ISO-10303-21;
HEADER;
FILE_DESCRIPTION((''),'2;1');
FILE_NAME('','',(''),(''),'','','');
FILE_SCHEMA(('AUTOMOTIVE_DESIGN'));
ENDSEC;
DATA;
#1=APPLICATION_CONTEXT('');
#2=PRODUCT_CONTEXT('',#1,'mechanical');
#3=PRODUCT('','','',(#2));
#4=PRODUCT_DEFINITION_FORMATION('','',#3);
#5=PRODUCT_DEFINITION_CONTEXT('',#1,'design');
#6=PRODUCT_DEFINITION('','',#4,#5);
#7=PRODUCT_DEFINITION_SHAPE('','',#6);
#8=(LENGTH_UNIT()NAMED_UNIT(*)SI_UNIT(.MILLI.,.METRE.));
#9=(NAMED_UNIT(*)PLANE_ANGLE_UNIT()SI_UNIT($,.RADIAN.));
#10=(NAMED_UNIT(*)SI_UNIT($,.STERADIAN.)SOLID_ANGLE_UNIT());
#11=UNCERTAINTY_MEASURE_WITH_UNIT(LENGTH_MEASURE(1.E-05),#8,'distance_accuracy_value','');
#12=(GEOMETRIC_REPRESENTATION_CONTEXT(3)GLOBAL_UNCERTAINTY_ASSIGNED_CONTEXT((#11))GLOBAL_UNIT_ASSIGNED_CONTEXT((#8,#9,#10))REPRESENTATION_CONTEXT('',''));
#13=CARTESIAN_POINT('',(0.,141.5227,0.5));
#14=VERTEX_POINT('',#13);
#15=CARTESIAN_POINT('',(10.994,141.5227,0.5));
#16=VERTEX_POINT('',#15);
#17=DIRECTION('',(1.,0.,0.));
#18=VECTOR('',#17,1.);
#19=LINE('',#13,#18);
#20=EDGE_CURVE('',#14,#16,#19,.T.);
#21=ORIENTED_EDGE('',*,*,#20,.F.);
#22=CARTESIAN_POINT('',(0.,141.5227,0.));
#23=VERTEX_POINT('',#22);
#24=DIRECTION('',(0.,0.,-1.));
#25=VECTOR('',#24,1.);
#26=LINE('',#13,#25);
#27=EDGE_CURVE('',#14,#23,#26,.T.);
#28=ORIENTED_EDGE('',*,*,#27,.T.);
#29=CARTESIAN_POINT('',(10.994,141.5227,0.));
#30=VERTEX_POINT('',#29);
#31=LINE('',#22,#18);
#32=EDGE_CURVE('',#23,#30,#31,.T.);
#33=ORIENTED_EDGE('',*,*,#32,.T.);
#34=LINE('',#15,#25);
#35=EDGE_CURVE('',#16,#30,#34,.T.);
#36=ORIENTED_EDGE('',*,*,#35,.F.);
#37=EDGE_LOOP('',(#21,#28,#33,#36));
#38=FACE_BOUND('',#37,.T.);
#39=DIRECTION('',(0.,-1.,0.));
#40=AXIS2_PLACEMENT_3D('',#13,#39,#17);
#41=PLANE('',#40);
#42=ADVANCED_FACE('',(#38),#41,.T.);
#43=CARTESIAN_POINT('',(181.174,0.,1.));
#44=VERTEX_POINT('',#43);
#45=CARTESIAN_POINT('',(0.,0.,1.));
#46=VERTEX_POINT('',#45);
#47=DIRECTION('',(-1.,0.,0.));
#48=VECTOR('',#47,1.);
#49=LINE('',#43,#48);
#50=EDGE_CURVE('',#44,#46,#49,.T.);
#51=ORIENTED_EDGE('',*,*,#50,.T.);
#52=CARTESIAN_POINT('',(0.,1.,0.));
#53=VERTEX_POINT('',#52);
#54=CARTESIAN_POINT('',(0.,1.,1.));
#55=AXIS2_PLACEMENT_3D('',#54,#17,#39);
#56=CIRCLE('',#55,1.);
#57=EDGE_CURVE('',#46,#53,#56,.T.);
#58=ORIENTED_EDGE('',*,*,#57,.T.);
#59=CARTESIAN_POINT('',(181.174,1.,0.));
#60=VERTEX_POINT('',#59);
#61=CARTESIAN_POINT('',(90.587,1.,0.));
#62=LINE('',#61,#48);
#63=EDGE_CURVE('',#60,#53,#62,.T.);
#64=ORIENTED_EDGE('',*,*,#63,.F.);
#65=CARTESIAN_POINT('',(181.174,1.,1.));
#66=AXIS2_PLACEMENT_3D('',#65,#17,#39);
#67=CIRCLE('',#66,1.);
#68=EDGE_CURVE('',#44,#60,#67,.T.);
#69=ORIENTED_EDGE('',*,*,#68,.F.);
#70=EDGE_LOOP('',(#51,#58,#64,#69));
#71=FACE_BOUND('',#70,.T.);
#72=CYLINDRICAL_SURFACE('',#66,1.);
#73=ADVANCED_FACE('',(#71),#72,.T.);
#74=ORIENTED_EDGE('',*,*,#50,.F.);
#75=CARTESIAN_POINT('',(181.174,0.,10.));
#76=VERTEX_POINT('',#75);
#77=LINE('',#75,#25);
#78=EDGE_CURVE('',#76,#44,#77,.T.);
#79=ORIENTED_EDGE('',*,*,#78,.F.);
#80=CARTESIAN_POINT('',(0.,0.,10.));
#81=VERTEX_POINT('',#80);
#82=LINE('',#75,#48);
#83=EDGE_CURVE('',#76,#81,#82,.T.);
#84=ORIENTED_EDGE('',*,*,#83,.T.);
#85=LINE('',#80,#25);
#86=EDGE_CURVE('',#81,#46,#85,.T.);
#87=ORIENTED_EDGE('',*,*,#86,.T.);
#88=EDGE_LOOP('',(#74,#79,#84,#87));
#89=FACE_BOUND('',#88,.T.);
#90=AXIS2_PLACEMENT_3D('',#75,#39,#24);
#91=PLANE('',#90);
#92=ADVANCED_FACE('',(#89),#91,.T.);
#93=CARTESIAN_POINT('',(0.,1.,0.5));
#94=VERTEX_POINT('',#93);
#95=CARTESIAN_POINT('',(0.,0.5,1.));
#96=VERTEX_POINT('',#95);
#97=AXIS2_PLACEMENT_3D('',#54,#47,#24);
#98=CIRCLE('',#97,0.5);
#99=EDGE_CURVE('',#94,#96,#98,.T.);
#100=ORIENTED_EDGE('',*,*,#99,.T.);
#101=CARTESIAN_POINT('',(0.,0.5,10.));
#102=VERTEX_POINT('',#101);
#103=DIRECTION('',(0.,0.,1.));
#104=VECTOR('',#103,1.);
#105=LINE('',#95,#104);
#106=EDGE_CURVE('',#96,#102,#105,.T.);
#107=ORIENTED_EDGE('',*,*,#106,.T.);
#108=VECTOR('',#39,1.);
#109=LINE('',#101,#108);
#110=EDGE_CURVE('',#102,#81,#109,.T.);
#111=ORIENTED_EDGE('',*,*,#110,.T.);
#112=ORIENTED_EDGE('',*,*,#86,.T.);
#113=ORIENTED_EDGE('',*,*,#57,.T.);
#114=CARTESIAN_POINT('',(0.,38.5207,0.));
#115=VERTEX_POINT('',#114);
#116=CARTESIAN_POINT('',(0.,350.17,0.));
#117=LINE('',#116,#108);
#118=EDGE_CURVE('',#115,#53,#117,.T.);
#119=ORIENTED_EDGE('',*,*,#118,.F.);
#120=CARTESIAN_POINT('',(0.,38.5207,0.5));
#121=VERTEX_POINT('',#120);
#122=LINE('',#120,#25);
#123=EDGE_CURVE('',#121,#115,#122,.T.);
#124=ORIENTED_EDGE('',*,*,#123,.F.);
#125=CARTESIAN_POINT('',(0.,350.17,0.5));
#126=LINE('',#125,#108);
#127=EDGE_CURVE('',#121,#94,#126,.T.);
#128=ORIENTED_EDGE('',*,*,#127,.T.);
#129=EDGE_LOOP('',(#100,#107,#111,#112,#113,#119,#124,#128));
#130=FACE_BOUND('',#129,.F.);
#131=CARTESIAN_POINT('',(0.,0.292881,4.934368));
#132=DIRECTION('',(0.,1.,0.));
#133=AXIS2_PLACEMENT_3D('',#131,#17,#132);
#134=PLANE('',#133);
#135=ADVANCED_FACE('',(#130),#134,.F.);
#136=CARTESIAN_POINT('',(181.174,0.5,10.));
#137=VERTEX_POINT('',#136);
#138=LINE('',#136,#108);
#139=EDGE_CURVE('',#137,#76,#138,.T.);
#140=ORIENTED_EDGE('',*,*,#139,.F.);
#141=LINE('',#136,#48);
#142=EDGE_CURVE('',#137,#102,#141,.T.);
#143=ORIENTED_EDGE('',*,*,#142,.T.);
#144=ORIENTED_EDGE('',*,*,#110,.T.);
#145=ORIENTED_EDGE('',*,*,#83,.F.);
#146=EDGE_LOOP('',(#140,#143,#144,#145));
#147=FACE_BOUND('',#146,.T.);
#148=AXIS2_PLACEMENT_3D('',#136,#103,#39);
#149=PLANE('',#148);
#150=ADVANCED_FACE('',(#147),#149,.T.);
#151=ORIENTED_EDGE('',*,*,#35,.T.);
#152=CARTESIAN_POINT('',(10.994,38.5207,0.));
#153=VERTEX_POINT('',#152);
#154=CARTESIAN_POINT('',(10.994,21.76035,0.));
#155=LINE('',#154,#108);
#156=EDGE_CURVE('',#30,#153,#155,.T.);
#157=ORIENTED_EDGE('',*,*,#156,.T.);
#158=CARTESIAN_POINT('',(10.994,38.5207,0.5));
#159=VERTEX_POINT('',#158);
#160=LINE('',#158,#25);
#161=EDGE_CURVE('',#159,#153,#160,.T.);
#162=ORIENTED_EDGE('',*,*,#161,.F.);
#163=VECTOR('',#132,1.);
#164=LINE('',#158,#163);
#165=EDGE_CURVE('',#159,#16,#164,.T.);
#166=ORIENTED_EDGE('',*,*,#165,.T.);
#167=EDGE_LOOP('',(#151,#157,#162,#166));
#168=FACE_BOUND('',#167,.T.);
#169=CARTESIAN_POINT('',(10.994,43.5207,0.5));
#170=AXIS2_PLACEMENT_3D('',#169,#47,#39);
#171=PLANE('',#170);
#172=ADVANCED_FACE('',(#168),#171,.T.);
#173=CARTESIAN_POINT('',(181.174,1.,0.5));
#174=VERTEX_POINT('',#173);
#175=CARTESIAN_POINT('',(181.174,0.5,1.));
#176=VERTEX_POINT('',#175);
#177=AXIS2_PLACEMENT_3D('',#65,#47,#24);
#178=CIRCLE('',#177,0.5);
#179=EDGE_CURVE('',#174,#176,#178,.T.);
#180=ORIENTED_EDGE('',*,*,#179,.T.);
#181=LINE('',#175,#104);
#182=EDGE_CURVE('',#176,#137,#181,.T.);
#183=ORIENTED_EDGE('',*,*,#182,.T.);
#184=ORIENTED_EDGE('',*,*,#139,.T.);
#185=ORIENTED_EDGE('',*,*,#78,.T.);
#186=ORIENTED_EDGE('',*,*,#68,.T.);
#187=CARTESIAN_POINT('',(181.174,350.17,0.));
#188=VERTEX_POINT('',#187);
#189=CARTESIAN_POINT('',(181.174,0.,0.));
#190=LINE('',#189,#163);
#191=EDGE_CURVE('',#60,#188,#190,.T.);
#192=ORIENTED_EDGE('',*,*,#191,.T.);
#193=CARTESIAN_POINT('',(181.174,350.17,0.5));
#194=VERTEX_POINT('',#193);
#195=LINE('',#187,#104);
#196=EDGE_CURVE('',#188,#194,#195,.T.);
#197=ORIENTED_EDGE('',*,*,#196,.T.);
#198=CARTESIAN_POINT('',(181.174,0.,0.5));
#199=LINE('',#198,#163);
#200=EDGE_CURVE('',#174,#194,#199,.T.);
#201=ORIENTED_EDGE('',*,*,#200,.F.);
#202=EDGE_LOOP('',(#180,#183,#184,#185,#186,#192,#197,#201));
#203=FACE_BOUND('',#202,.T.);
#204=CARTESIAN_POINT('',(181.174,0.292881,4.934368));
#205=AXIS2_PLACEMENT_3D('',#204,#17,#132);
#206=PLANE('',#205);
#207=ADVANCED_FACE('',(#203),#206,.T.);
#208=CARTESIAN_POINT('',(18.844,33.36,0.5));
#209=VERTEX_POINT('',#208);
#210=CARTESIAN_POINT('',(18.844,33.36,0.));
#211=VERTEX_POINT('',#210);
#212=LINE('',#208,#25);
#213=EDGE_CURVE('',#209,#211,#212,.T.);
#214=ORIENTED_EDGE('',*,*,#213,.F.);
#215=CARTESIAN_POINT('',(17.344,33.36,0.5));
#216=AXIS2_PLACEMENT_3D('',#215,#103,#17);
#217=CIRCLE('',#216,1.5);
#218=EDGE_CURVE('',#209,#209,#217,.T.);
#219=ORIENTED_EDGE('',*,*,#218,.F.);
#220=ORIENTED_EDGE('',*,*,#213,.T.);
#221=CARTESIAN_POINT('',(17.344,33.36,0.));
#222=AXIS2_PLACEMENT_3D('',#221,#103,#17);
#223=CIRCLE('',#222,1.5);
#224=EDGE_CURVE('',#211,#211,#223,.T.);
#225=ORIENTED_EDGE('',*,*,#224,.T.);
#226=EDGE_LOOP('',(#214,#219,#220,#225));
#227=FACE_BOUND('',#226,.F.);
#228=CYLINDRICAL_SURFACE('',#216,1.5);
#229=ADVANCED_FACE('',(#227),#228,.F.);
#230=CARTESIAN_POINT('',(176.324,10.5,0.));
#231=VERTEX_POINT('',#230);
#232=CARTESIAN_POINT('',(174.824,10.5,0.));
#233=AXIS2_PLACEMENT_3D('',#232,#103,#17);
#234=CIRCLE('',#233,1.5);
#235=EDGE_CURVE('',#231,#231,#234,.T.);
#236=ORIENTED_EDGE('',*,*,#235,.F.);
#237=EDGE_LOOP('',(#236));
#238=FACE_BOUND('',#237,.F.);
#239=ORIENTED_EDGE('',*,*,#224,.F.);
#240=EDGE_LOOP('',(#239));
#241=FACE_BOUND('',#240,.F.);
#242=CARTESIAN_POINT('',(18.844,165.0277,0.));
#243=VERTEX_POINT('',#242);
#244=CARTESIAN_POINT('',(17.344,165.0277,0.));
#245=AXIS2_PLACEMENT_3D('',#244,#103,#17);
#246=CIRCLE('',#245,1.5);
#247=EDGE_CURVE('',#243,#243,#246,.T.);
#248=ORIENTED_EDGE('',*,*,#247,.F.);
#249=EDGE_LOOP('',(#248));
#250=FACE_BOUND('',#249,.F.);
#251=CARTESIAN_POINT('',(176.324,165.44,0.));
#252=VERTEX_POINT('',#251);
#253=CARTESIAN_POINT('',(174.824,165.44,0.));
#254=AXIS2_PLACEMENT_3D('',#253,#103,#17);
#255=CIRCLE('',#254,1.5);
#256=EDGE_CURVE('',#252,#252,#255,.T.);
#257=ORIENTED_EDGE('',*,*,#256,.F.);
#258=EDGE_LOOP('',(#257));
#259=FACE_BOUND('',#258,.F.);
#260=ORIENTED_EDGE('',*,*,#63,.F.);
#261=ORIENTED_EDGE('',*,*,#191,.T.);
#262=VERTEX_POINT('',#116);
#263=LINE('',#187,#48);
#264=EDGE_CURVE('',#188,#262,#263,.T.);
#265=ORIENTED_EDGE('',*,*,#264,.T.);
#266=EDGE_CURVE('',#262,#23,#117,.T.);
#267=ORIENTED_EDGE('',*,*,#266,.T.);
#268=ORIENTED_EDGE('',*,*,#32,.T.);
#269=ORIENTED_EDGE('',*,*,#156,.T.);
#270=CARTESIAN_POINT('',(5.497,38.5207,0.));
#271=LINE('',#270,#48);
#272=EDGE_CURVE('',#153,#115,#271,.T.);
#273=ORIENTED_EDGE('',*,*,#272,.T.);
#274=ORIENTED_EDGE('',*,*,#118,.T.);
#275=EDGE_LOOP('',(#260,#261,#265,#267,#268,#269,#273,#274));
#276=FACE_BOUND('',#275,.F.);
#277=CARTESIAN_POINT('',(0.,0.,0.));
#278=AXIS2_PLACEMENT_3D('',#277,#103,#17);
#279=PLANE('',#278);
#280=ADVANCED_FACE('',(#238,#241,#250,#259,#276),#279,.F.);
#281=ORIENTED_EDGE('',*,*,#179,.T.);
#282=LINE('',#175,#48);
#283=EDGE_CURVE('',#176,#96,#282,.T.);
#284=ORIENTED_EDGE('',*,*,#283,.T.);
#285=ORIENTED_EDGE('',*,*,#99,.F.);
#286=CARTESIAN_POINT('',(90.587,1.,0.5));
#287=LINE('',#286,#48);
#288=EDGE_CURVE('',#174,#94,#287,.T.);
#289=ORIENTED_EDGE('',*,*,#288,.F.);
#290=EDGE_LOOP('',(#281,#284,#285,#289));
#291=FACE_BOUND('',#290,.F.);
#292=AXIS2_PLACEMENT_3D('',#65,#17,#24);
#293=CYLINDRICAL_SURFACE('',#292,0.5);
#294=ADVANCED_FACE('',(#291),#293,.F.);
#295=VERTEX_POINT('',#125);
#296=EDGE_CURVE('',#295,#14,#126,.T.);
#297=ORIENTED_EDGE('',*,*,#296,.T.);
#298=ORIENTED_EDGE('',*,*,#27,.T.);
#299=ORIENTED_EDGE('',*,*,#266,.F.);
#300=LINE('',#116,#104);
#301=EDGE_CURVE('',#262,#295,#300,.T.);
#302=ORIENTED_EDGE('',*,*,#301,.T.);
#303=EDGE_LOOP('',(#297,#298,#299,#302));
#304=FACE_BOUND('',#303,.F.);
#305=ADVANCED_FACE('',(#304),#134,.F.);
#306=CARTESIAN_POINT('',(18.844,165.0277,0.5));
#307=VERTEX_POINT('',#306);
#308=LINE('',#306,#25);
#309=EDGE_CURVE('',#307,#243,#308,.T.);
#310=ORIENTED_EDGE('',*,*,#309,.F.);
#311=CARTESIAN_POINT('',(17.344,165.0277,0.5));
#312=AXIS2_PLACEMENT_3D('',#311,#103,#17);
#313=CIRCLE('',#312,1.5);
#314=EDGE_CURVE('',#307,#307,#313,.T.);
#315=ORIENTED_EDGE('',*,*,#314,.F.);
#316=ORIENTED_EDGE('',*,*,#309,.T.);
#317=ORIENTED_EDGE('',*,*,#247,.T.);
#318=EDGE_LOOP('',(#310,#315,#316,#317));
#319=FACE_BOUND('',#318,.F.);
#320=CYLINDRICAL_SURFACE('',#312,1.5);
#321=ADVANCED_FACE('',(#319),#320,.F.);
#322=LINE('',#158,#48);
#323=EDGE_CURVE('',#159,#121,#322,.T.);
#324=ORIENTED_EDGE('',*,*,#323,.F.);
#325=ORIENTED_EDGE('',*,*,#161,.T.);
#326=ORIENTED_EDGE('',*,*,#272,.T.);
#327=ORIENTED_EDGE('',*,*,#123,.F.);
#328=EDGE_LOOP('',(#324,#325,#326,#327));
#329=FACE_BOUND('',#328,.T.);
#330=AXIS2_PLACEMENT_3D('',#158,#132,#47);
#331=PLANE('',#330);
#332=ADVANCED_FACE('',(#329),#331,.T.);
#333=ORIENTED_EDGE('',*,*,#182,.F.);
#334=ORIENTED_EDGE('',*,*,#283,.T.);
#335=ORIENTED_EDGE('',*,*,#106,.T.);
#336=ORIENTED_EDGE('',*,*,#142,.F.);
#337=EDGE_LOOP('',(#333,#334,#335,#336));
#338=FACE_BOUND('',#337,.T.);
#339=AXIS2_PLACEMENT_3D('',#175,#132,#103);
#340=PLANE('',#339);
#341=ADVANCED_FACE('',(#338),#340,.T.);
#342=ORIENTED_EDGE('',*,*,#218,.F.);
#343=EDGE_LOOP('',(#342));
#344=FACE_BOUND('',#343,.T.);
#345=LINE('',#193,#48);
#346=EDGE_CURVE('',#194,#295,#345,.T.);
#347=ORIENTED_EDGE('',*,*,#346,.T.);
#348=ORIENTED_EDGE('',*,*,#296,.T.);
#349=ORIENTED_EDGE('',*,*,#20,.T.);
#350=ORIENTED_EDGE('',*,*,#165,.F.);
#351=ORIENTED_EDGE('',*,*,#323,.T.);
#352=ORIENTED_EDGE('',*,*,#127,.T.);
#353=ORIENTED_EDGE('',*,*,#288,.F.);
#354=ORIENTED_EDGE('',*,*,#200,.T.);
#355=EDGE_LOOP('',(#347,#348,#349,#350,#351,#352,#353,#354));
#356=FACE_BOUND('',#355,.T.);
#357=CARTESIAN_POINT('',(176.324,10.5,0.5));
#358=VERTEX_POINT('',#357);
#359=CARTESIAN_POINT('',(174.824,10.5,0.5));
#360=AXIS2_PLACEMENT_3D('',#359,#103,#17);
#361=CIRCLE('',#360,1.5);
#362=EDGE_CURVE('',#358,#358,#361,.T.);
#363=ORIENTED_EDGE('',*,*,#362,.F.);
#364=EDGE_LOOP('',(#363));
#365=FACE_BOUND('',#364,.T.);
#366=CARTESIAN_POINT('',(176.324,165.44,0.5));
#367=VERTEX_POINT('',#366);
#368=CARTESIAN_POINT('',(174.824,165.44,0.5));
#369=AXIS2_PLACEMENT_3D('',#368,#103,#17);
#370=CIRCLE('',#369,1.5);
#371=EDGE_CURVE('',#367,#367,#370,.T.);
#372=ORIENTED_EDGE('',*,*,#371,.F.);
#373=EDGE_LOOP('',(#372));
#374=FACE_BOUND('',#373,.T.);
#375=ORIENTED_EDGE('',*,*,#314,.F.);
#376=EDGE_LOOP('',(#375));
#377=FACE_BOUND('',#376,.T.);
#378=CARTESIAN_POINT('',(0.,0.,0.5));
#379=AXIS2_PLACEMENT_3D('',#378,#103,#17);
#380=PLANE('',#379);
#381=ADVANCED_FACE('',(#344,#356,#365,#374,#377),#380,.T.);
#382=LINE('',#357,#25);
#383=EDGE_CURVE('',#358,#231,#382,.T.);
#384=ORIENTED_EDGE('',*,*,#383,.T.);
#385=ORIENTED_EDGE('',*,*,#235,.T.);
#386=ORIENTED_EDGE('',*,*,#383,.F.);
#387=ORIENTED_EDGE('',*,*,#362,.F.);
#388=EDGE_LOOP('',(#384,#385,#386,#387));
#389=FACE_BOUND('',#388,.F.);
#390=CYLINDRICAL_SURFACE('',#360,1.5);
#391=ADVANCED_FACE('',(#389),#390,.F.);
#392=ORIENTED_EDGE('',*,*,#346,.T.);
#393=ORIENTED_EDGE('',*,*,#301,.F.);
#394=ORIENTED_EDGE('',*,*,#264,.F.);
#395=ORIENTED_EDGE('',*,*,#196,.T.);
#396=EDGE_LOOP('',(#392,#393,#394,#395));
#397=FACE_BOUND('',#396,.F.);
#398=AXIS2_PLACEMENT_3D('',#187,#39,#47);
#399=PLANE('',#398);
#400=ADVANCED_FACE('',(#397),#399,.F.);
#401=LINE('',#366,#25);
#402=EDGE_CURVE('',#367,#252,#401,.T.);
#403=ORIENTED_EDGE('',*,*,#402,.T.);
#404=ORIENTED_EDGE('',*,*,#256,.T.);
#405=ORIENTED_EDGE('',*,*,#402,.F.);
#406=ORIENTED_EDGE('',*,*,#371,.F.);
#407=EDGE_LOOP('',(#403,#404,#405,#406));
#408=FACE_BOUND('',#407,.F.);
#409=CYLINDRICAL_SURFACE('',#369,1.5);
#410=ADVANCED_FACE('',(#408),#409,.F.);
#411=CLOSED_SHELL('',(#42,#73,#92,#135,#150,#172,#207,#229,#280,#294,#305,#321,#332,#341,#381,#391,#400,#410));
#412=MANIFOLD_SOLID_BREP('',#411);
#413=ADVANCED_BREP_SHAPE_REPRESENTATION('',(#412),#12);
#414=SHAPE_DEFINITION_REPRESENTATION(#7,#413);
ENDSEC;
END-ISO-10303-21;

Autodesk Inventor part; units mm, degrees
ref_plane "YZ Plane" through (0, 0, 0) normal (1, 0, 0) x (0, 1, 0)
ref_plane "XZ Plane" through (0, 0, 0) normal (0, 1, 0) x (-1, 0, 0)
ref_plane "XY Plane" through (0, 0, 0) normal (0, 0, 1) x (1, 0, 0)
sketch "Sketch1" plane through (0, 0, 0) normal (0, 0, 1) x (1, 0, 0)
  line L0 (0, 0) -> (181.174, 0)
  line L1 (181.174, 0) -> (181.174, 350.17)
  line L2 (181.174, 350.17) -> (0, 350.17)
  line L3 (0, 350.17) -> (0, 0)
  dimension "d0" = 181.174
  dimension "d1" = 350.17
extrude "Plate1" add sketch "Sketch1" along normal blind 0.5
sketch "Sketch3" plane through (181.174, 0.5, 0) normal (0, -1, 0) x (1, 0, 0)
  line L0 (-181.174, 0) -> (0, 0)
  line L1 (0, 0) -> (0, 10)
  line L2 (0, 10) -> (-181.174, 10)
  line L3 (-181.174, 10) -> (-181.174, 0)
edge flange "Flange1" height 10 angle 90 thickness 0.5 bend radius 0.5 thickness toward (0, -1, 0) relief tear relief width 0.5 relief depth 0.25 edges at (90.587, 0, 0.5) wall of the first edge with corners at (0, 0.5, 0) (181.174, 0.5, 0) (181.174, 0.5, 10) (0, 0.5, 10)
bend "Bend1"
corner "Corner1"
sketch "Sketch4" plane through (0, 0, 0.5) normal (0, 0, 1) x (1, 0, 0)
  line L0 (181.174, 350.17) -> (181.174, 1) projected
  line L1 (10.4326, 171.5141) -> (10.4326, 6.5941)
  arc A0 (10.4326, 6.5941) -> (12.9726, 4.0541) centre (12.9726, 6.5941) ccw
  line L2 (177.8926, 4.0541) -> (12.9726, 4.0541)
  arc A1 (177.8926, 4.0541) -> (180.4326, 6.5941) centre (177.8926, 6.5941) ccw
  line L3 (180.4326, 171.5141) -> (180.4326, 6.5941)
  arc A2 (180.4326, 171.5141) -> (177.8926, 174.0541) centre (177.8926, 171.5141) ccw
  line L4 (177.8926, 174.0541) -> (12.9726, 174.0541)
  arc A3 (12.9726, 174.0541) -> (10.4326, 171.5141) centre (12.9726, 171.5141) ccw
  circle A4 centre (174.0826, 14.2141) radius 2.032
  circle A5 centre (174.0826, 169.1541) radius 2.032
  circle A6 centre (16.6026, 169.1541) radius 2.032
  circle A7 centre (16.6026, 37.0741) radius 2.032
  line L5 (181.174, 0) -> (181.174, 10.5)
  line L6 (181.174, 1) -> (181.174, 350.17) projected
  line L7 (181.174, 10.5) -> (174.824, 10.5) construction
  circle A8 centre (174.824, 10.5) radius 1.5
  line L8 (174.824, 10.5) -> (17.344, 10.5) construction
  line L9 (17.344, 10.5) -> (17.344, 33.36) construction
  circle A9 centre (17.344, 33.36) radius 1.5
  line L10 (17.344, 33.36) -> (17.344, 165.44) construction
  circle A10 centre (17.344, 165.0277) radius 1.5
  line L11 (174.824, 10.5) -> (174.824, 165.44) construction
  circle A11 centre (174.824, 165.44) radius 1.5
  point P0 (0, 0)
  point P1 (95.4326, 89.0541)
  dimension "d26" = 10.5
  dimension "d27" = 6.35
  dimension "d28" = 3
  dimension "d29" = 157.48
  dimension "d30" = 22.86
  dimension "d31" = 3
  dimension "d32" = 132.08
  dimension "d33" = 3
  dimension "d34" = 154.94
  dimension "d35" = 3
extrude "Extrusion2" cut sketch "Sketch4" against normal blind 10 contours A8 | A9 | A10 | A11
sketch "Sketch5" plane through (0, 0, 0.5) normal (0, 0, 1) x (1, 0, 0)
  circle A0 centre (17.344, 165.0277) radius 1.5 projected
  line L0 (0, 1) -> (0, 350.17) projected
  line L1 (17.344, 165.0277) -> (17.344, 131.5227) construction
  line L2 (17.344, 131.5227) -> (17.344, 43.5207) construction
  line L3 (17.344, 131.5227) -> (10.994, 131.5227) construction
  line L4 (10.994, 131.5227) -> (0, 131.5227)
  line L5 (0, 131.5227) -> (0, 43.5207)
  line L6 (0, 43.5207) -> (10.994, 43.5207)
  line L7 (10.994, 43.5207) -> (10.994, 131.5227)
  line L8 (10.994, 131.5227) -> (0, 131.5227)
  line L9 (0, 131.5227) -> (0, 141.5227)
  line L10 (0, 141.5227) -> (10.994, 141.5227)
  line L11 (10.994, 141.5227) -> (10.994, 131.5227)
  line L12 (0, 43.5207) -> (10.994, 43.5207)
  line L13 (10.994, 43.5207) -> (10.994, 38.5207)
  line L14 (10.994, 38.5207) -> (0, 38.5207)
  line L15 (0, 38.5207) -> (0, 43.5207)
  point P0 (0, 0)
  dimension "d38" = 33.505
  dimension "d39" = 88.002
  dimension "d40" = 6.35
  dimension "d43" = 10
  dimension "d44" = 5
extrude "Extrusion4" cut sketch "Sketch5" against normal blind 10 contours L0 L6 L13 L14 | L0 L4 L7 L6 | L0 L10 L11 L4
equation "\"d2\" = Thickness"
equation "\"d16\" = BendReliefWidth"
equation "\"d17\" = BendReliefDepth"
equation "\"d18\" = MinimumRemnant"
equation "\"d19\" = TransitionRadius"
equation "\"d22\" = BendRadius"
equation "\"d23\" = CornerReliefSize"
equation "\"d24\" = GapSize"
equation "\"d25\" = JacobiRadiusSize"
equation "\"BendRadius\" = Thickness"
equation "\"BendReliefWidth\" = Thickness"
equation "\"BendReliefDepth\" = 0.5 * Thickness"
equation "\"CornerReliefSize\" = 4 * Thickness"
equation "\"MinimumRemnant\" = 2 * Thickness"
equation "\"TransitionRadius\" = BendRadius"
equation "\"JacobiRadiusSize\" = BendRadius"
equation "\"GapSize\" = Thickness"
equation "\"Thickness\" = 0.5"
properties part number "my trunk"
